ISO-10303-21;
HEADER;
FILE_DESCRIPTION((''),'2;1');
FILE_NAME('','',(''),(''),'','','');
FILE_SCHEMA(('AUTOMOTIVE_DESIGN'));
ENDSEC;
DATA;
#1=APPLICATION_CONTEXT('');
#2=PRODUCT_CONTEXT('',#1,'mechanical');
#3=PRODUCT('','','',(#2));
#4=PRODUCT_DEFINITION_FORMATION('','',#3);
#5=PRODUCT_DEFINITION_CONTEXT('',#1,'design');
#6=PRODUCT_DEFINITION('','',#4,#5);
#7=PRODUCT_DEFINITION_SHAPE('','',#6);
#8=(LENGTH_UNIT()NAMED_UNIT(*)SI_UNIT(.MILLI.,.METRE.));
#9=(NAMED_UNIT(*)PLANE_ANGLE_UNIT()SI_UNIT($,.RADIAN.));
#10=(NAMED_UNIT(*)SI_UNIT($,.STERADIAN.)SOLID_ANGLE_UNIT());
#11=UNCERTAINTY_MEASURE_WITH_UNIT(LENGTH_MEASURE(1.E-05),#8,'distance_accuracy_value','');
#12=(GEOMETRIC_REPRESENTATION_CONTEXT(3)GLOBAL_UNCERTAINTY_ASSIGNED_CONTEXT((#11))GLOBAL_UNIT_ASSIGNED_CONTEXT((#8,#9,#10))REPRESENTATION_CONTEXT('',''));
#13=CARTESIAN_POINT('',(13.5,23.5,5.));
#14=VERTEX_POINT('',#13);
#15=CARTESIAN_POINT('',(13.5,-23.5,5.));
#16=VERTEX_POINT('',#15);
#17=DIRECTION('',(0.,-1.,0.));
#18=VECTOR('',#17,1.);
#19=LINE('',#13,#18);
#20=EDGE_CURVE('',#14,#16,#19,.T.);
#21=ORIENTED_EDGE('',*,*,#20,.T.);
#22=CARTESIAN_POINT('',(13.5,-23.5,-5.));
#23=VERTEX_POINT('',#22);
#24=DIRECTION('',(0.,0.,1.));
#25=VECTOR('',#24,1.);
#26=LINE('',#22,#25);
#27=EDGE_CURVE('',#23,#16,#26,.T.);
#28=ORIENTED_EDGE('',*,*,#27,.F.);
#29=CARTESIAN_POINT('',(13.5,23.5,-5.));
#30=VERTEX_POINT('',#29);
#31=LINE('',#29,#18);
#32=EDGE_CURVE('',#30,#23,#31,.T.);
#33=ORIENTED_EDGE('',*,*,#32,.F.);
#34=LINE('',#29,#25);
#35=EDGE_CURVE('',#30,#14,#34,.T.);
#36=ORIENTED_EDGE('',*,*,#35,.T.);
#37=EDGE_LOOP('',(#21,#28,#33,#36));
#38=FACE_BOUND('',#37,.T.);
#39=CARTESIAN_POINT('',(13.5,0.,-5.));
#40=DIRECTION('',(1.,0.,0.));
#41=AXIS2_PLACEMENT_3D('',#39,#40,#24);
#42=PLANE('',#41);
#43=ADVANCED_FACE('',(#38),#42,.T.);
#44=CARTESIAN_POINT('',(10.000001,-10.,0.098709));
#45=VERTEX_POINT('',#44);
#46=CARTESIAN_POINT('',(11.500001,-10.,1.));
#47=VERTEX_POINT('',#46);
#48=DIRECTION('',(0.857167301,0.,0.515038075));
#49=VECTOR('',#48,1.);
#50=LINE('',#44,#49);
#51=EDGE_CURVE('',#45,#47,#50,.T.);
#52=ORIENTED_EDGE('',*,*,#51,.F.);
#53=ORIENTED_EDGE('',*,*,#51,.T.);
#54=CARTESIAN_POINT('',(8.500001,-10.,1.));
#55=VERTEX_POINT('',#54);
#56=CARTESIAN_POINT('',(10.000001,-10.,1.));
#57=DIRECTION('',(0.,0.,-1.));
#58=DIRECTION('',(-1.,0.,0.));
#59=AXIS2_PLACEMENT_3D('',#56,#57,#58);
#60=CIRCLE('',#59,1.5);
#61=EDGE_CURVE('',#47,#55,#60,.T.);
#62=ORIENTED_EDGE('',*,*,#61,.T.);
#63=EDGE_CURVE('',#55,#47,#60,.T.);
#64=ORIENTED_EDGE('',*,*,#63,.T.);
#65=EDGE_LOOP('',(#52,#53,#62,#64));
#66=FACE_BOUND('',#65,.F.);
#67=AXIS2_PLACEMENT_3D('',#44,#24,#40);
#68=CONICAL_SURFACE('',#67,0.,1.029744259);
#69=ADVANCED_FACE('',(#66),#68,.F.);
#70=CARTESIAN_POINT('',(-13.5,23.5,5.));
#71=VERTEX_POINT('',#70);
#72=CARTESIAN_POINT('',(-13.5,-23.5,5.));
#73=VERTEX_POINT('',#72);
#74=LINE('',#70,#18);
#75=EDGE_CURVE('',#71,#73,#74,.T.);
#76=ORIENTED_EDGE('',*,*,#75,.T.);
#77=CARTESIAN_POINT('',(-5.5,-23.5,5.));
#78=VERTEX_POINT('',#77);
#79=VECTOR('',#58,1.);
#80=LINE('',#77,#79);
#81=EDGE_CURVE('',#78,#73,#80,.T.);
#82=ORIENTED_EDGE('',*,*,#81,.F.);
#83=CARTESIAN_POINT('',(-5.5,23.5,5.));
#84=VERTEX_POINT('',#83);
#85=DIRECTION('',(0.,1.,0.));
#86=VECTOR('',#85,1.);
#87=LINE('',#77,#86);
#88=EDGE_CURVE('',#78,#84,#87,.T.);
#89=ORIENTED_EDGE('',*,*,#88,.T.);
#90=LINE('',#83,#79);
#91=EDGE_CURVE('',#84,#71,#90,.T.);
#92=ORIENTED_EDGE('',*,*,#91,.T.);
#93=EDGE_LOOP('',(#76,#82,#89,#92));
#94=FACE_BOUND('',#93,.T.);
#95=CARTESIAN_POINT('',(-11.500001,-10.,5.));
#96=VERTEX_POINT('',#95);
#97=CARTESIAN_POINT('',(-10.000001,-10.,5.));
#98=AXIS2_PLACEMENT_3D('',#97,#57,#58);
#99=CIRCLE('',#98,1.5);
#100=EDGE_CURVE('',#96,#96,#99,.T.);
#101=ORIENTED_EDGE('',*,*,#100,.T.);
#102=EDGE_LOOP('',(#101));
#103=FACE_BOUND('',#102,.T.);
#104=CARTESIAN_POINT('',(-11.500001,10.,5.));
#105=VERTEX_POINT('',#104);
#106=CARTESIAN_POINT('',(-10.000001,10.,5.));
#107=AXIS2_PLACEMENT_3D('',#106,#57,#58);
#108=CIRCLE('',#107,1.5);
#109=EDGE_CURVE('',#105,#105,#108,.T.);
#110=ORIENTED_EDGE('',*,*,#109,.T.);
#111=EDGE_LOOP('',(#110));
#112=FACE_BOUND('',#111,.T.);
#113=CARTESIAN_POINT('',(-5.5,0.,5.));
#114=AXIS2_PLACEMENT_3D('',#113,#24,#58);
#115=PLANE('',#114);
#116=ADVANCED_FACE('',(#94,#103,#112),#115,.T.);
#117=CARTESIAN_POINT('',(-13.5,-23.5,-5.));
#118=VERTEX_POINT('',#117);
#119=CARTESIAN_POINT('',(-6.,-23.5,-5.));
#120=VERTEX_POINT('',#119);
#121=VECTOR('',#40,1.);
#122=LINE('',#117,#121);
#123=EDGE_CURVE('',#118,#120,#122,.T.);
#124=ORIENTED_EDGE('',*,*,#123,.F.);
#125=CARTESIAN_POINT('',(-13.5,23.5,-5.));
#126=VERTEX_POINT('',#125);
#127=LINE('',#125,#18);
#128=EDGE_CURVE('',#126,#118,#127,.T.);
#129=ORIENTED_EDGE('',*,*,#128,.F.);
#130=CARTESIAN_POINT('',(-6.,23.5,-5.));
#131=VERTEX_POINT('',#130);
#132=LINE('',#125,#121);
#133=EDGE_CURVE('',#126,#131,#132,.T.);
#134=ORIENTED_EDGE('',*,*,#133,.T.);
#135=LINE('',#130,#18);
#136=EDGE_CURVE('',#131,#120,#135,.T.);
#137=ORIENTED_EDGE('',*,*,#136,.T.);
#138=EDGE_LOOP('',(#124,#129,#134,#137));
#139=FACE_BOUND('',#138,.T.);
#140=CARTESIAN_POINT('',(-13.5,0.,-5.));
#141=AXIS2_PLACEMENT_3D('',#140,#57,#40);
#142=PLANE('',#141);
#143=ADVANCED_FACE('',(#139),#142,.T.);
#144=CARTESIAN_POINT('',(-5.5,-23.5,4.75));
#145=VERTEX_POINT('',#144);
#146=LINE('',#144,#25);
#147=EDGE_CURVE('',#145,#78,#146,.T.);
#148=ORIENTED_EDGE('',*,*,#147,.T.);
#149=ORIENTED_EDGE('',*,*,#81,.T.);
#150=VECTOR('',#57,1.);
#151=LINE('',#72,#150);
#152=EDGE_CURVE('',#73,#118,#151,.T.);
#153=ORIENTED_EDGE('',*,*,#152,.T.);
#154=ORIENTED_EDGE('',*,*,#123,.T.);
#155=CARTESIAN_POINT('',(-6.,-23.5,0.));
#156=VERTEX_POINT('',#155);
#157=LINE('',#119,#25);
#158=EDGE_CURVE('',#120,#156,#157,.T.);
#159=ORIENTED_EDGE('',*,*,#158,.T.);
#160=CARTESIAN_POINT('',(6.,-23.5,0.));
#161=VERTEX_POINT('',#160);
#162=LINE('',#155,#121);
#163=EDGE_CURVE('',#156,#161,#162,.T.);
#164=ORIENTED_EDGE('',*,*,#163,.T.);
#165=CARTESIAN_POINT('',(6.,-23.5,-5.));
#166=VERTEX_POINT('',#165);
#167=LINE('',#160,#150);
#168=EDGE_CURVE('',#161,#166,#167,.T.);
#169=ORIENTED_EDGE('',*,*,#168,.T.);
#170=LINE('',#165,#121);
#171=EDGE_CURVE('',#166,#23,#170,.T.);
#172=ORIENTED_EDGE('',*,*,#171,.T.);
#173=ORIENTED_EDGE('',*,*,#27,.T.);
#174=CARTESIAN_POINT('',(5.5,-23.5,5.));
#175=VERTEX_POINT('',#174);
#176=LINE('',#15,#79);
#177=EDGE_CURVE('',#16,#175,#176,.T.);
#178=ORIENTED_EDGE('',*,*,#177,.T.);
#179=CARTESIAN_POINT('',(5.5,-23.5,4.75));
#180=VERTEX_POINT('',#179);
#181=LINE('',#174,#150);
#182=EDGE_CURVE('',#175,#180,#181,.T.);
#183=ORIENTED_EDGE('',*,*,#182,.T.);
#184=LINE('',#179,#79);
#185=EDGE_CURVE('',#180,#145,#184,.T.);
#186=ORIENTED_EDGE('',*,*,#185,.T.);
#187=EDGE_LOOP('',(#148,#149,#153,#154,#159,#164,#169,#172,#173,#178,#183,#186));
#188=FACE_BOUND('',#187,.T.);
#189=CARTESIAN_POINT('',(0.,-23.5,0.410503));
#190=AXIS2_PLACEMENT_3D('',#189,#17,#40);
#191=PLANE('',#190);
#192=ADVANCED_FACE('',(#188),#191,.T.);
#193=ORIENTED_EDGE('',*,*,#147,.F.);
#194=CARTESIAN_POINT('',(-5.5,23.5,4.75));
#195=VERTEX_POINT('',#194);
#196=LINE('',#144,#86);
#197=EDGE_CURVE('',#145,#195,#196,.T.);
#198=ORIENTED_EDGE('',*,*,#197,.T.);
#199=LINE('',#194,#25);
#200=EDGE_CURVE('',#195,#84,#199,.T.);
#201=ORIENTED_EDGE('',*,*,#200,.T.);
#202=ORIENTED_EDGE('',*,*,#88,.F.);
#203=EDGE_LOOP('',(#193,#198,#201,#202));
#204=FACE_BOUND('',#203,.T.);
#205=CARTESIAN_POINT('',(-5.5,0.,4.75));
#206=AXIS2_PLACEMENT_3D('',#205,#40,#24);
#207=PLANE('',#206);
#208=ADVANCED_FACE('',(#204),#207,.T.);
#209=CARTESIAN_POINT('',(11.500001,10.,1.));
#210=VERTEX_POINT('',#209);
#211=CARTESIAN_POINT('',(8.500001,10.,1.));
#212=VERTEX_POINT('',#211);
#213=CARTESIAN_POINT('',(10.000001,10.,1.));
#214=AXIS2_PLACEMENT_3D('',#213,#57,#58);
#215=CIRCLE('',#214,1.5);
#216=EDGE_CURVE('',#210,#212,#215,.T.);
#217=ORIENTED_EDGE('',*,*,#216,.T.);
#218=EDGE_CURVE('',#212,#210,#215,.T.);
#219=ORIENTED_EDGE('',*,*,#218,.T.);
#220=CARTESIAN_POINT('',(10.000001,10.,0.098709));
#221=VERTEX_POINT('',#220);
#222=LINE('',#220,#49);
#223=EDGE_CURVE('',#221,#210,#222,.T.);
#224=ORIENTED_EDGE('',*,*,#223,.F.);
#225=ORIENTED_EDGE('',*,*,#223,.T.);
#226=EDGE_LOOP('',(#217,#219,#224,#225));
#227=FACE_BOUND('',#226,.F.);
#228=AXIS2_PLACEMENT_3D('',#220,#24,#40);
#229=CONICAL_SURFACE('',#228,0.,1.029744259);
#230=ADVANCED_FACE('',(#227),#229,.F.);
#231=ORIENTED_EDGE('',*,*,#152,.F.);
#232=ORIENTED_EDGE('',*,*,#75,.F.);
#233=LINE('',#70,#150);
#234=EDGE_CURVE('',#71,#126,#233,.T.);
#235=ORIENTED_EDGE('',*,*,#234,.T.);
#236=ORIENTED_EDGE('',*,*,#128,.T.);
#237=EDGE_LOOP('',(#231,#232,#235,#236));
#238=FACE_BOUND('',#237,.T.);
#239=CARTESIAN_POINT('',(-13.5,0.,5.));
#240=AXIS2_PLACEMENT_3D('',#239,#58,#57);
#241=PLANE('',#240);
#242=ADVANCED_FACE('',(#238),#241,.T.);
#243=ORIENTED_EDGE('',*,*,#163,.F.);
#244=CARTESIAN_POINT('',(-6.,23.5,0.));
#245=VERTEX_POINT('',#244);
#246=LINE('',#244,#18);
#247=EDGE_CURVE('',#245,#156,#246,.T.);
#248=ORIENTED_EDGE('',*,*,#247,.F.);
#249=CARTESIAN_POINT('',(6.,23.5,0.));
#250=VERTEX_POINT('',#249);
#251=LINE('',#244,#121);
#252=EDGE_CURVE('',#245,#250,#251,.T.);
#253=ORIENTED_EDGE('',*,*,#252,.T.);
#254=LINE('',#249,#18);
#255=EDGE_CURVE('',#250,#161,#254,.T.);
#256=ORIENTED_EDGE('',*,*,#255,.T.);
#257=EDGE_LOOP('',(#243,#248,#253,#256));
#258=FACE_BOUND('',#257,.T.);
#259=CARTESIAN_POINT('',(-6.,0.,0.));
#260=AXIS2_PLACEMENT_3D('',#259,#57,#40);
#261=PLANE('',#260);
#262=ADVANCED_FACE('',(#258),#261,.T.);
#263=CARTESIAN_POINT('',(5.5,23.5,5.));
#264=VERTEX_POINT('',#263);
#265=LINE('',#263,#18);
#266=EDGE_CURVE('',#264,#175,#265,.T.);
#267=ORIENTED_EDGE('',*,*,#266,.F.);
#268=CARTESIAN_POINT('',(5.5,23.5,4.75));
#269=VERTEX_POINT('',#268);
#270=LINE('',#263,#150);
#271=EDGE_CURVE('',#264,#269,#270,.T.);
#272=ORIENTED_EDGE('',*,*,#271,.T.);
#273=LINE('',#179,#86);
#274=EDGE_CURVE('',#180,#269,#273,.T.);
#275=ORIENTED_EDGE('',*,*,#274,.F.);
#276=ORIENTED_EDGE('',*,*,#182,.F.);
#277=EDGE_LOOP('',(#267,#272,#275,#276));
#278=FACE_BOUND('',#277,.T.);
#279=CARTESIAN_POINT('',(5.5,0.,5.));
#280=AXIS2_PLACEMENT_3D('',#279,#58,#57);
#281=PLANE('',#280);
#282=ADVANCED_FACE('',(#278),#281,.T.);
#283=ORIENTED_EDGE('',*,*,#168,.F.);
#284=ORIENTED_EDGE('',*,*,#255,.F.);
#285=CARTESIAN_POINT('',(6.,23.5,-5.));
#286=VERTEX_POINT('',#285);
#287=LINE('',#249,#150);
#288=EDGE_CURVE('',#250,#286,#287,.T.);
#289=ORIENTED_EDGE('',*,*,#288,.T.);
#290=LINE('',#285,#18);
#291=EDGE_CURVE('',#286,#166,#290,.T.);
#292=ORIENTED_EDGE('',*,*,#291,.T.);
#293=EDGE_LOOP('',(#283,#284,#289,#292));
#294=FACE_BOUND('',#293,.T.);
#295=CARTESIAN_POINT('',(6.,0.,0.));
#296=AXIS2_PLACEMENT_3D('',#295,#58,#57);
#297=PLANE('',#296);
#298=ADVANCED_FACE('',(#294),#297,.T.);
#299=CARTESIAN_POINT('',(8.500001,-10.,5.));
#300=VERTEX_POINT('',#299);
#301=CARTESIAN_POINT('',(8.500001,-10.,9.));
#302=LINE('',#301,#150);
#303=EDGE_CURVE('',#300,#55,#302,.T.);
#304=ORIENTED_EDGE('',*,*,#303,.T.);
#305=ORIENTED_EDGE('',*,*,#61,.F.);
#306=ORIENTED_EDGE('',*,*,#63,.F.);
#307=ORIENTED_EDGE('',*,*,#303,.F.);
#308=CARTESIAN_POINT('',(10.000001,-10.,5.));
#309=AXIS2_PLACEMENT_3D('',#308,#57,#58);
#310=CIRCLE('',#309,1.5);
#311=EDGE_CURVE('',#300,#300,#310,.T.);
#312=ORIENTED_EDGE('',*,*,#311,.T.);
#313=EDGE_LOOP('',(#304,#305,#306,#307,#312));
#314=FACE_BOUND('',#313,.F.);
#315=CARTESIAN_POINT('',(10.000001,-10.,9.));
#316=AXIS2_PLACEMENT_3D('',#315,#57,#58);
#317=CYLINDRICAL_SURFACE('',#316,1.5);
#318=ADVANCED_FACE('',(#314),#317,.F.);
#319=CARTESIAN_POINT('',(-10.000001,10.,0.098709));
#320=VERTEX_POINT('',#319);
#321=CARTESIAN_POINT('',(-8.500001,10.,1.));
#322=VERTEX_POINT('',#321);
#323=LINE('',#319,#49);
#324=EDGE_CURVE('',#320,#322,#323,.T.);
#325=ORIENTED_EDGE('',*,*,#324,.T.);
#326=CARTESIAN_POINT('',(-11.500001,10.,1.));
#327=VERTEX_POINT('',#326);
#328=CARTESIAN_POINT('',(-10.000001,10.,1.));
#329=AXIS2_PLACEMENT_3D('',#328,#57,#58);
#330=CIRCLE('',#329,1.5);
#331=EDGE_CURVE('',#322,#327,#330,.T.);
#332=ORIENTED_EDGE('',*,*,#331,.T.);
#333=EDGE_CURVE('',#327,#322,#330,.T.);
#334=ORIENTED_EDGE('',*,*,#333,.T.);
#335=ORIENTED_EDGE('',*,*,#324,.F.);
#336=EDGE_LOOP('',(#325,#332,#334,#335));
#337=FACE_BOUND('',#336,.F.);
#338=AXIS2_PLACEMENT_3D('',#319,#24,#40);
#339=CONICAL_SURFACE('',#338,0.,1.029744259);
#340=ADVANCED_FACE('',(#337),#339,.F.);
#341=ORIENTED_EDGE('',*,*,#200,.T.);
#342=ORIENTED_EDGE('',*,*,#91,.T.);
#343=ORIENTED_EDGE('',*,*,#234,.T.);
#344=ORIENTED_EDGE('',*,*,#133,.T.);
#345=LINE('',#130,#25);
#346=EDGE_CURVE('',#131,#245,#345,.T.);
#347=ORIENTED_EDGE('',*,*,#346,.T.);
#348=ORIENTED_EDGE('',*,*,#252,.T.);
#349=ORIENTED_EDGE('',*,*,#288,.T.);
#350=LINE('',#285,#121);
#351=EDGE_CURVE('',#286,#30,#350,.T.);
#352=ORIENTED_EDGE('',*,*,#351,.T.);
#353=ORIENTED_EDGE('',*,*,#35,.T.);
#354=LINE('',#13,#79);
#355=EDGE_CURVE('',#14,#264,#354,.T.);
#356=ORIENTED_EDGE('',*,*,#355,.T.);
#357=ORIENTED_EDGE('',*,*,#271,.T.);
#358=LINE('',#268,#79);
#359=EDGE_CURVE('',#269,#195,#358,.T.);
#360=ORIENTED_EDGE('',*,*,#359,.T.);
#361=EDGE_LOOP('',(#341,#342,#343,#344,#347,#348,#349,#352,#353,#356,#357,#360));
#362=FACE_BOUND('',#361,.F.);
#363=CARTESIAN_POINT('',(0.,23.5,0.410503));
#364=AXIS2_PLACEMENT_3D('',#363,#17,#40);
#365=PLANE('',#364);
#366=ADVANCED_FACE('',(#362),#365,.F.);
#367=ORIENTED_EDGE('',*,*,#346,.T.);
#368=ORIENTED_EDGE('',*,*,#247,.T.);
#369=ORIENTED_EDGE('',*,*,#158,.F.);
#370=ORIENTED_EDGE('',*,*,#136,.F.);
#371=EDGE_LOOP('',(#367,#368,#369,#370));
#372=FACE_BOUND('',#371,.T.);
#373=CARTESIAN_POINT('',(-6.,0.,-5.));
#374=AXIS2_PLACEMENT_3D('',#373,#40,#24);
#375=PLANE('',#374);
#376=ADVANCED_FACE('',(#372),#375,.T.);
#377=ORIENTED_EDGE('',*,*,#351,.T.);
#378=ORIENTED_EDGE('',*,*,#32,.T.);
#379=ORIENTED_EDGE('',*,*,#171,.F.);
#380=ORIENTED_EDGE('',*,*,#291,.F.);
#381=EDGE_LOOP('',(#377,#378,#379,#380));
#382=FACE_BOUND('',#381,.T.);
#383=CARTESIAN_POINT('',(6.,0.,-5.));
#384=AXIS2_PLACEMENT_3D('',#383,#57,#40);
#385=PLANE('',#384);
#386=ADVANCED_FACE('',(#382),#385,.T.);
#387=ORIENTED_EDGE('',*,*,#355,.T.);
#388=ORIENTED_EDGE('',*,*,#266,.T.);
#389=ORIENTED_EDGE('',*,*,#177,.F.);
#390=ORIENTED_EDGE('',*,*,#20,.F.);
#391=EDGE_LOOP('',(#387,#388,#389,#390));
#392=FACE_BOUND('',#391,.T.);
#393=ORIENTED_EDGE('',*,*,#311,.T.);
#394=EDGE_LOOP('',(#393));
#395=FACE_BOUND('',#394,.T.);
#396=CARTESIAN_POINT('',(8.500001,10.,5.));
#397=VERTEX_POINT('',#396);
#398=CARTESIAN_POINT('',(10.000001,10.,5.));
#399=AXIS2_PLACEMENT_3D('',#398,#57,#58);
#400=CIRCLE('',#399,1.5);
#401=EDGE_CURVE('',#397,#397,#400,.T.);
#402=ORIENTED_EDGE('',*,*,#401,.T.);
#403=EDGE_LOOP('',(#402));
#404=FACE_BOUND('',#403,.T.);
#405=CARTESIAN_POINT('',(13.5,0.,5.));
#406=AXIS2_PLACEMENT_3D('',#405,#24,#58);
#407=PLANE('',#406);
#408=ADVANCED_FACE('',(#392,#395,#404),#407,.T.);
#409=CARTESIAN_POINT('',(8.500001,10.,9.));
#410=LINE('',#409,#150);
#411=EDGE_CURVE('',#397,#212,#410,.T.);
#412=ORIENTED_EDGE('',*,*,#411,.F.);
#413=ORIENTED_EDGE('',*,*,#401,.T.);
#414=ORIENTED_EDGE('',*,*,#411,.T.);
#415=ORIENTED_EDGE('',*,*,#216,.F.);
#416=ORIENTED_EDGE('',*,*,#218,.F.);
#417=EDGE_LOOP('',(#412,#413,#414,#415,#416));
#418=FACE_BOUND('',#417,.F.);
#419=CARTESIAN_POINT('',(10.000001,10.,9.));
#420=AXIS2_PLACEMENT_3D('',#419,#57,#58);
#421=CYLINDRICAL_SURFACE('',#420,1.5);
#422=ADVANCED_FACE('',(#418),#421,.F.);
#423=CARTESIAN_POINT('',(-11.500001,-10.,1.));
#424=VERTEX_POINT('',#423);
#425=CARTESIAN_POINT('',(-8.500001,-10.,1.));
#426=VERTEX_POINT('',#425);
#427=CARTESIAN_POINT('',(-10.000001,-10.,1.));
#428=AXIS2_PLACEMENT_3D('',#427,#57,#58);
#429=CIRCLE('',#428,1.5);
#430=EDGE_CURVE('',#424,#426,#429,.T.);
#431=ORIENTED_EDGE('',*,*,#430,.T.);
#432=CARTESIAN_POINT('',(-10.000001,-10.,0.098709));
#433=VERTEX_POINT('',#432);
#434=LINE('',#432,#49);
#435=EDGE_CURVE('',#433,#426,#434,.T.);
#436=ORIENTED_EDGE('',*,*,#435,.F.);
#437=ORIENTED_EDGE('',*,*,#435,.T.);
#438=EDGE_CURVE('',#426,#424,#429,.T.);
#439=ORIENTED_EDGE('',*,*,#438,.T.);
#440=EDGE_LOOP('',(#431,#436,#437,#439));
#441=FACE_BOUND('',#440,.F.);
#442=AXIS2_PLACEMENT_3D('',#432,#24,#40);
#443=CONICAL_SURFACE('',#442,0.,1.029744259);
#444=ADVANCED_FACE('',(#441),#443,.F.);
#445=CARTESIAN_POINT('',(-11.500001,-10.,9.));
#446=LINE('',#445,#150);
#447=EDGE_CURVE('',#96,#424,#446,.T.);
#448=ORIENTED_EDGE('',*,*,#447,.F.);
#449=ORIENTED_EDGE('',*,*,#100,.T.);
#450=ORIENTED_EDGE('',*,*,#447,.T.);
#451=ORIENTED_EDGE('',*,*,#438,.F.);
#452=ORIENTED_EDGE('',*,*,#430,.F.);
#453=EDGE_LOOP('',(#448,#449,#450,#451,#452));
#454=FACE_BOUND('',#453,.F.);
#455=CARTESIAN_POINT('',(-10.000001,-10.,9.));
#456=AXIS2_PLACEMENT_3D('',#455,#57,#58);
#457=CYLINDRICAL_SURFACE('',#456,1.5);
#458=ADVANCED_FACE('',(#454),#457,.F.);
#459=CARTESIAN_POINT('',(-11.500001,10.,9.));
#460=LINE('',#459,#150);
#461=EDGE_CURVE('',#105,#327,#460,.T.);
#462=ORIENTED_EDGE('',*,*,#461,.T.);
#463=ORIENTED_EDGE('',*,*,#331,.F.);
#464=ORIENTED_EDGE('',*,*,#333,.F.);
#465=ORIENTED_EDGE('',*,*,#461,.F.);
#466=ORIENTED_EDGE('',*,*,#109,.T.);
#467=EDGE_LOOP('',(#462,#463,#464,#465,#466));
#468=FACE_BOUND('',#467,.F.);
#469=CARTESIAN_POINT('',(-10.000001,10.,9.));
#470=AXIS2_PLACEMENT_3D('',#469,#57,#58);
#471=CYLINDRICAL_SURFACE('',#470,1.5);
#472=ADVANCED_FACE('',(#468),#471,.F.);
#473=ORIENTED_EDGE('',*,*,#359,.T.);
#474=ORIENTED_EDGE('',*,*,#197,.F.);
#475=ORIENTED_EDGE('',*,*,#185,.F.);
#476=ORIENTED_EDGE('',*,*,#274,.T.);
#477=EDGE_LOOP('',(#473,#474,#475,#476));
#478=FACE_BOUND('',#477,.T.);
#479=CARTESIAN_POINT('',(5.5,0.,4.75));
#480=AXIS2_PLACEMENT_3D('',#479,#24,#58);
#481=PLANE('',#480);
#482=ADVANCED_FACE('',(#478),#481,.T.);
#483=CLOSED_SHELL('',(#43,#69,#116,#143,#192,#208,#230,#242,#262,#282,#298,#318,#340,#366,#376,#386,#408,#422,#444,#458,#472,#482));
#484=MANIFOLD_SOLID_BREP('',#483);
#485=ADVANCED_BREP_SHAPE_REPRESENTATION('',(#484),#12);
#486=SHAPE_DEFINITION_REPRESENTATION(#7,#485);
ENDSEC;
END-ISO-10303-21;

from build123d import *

# Parameters (mm, degrees)
F1_DEPTH = 23.5
F3_D     = 3
F3_DEPTH = 4
F3_TIP   = 0.9012909285


with BuildPart() as f1:
    # F0 (on Front) → F1 (new body, symmetric)
    with BuildSketch(Plane.XZ):
        Polygon((-5.5, 5), (-13.5, 5), (-13.5, -5), (-6, -5), (-6, 0), (6, 0), (6, -5), (13.5, -5), (13.5, 5), (5.5, 5), (5.5, 4.75), (-5.5, 4.75), align=None)
    extrude(amount=F1_DEPTH, both=True)

    # F3
    with Locations(Plane.XY.offset(5)):
        with Locations((-10.0000007078, 10), (10.0000007078, 10), (10.0000007078, -10), (-10.0000007078, -10)):
            Hole(F3_D / 2, depth=F3_DEPTH)
            with Locations((0, 0, -(F3_DEPTH + F3_TIP / 2))):  # 118° drill point
                Cone(0, F3_D / 2, F3_TIP, mode=Mode.SUBTRACT)


solid = f1.part
